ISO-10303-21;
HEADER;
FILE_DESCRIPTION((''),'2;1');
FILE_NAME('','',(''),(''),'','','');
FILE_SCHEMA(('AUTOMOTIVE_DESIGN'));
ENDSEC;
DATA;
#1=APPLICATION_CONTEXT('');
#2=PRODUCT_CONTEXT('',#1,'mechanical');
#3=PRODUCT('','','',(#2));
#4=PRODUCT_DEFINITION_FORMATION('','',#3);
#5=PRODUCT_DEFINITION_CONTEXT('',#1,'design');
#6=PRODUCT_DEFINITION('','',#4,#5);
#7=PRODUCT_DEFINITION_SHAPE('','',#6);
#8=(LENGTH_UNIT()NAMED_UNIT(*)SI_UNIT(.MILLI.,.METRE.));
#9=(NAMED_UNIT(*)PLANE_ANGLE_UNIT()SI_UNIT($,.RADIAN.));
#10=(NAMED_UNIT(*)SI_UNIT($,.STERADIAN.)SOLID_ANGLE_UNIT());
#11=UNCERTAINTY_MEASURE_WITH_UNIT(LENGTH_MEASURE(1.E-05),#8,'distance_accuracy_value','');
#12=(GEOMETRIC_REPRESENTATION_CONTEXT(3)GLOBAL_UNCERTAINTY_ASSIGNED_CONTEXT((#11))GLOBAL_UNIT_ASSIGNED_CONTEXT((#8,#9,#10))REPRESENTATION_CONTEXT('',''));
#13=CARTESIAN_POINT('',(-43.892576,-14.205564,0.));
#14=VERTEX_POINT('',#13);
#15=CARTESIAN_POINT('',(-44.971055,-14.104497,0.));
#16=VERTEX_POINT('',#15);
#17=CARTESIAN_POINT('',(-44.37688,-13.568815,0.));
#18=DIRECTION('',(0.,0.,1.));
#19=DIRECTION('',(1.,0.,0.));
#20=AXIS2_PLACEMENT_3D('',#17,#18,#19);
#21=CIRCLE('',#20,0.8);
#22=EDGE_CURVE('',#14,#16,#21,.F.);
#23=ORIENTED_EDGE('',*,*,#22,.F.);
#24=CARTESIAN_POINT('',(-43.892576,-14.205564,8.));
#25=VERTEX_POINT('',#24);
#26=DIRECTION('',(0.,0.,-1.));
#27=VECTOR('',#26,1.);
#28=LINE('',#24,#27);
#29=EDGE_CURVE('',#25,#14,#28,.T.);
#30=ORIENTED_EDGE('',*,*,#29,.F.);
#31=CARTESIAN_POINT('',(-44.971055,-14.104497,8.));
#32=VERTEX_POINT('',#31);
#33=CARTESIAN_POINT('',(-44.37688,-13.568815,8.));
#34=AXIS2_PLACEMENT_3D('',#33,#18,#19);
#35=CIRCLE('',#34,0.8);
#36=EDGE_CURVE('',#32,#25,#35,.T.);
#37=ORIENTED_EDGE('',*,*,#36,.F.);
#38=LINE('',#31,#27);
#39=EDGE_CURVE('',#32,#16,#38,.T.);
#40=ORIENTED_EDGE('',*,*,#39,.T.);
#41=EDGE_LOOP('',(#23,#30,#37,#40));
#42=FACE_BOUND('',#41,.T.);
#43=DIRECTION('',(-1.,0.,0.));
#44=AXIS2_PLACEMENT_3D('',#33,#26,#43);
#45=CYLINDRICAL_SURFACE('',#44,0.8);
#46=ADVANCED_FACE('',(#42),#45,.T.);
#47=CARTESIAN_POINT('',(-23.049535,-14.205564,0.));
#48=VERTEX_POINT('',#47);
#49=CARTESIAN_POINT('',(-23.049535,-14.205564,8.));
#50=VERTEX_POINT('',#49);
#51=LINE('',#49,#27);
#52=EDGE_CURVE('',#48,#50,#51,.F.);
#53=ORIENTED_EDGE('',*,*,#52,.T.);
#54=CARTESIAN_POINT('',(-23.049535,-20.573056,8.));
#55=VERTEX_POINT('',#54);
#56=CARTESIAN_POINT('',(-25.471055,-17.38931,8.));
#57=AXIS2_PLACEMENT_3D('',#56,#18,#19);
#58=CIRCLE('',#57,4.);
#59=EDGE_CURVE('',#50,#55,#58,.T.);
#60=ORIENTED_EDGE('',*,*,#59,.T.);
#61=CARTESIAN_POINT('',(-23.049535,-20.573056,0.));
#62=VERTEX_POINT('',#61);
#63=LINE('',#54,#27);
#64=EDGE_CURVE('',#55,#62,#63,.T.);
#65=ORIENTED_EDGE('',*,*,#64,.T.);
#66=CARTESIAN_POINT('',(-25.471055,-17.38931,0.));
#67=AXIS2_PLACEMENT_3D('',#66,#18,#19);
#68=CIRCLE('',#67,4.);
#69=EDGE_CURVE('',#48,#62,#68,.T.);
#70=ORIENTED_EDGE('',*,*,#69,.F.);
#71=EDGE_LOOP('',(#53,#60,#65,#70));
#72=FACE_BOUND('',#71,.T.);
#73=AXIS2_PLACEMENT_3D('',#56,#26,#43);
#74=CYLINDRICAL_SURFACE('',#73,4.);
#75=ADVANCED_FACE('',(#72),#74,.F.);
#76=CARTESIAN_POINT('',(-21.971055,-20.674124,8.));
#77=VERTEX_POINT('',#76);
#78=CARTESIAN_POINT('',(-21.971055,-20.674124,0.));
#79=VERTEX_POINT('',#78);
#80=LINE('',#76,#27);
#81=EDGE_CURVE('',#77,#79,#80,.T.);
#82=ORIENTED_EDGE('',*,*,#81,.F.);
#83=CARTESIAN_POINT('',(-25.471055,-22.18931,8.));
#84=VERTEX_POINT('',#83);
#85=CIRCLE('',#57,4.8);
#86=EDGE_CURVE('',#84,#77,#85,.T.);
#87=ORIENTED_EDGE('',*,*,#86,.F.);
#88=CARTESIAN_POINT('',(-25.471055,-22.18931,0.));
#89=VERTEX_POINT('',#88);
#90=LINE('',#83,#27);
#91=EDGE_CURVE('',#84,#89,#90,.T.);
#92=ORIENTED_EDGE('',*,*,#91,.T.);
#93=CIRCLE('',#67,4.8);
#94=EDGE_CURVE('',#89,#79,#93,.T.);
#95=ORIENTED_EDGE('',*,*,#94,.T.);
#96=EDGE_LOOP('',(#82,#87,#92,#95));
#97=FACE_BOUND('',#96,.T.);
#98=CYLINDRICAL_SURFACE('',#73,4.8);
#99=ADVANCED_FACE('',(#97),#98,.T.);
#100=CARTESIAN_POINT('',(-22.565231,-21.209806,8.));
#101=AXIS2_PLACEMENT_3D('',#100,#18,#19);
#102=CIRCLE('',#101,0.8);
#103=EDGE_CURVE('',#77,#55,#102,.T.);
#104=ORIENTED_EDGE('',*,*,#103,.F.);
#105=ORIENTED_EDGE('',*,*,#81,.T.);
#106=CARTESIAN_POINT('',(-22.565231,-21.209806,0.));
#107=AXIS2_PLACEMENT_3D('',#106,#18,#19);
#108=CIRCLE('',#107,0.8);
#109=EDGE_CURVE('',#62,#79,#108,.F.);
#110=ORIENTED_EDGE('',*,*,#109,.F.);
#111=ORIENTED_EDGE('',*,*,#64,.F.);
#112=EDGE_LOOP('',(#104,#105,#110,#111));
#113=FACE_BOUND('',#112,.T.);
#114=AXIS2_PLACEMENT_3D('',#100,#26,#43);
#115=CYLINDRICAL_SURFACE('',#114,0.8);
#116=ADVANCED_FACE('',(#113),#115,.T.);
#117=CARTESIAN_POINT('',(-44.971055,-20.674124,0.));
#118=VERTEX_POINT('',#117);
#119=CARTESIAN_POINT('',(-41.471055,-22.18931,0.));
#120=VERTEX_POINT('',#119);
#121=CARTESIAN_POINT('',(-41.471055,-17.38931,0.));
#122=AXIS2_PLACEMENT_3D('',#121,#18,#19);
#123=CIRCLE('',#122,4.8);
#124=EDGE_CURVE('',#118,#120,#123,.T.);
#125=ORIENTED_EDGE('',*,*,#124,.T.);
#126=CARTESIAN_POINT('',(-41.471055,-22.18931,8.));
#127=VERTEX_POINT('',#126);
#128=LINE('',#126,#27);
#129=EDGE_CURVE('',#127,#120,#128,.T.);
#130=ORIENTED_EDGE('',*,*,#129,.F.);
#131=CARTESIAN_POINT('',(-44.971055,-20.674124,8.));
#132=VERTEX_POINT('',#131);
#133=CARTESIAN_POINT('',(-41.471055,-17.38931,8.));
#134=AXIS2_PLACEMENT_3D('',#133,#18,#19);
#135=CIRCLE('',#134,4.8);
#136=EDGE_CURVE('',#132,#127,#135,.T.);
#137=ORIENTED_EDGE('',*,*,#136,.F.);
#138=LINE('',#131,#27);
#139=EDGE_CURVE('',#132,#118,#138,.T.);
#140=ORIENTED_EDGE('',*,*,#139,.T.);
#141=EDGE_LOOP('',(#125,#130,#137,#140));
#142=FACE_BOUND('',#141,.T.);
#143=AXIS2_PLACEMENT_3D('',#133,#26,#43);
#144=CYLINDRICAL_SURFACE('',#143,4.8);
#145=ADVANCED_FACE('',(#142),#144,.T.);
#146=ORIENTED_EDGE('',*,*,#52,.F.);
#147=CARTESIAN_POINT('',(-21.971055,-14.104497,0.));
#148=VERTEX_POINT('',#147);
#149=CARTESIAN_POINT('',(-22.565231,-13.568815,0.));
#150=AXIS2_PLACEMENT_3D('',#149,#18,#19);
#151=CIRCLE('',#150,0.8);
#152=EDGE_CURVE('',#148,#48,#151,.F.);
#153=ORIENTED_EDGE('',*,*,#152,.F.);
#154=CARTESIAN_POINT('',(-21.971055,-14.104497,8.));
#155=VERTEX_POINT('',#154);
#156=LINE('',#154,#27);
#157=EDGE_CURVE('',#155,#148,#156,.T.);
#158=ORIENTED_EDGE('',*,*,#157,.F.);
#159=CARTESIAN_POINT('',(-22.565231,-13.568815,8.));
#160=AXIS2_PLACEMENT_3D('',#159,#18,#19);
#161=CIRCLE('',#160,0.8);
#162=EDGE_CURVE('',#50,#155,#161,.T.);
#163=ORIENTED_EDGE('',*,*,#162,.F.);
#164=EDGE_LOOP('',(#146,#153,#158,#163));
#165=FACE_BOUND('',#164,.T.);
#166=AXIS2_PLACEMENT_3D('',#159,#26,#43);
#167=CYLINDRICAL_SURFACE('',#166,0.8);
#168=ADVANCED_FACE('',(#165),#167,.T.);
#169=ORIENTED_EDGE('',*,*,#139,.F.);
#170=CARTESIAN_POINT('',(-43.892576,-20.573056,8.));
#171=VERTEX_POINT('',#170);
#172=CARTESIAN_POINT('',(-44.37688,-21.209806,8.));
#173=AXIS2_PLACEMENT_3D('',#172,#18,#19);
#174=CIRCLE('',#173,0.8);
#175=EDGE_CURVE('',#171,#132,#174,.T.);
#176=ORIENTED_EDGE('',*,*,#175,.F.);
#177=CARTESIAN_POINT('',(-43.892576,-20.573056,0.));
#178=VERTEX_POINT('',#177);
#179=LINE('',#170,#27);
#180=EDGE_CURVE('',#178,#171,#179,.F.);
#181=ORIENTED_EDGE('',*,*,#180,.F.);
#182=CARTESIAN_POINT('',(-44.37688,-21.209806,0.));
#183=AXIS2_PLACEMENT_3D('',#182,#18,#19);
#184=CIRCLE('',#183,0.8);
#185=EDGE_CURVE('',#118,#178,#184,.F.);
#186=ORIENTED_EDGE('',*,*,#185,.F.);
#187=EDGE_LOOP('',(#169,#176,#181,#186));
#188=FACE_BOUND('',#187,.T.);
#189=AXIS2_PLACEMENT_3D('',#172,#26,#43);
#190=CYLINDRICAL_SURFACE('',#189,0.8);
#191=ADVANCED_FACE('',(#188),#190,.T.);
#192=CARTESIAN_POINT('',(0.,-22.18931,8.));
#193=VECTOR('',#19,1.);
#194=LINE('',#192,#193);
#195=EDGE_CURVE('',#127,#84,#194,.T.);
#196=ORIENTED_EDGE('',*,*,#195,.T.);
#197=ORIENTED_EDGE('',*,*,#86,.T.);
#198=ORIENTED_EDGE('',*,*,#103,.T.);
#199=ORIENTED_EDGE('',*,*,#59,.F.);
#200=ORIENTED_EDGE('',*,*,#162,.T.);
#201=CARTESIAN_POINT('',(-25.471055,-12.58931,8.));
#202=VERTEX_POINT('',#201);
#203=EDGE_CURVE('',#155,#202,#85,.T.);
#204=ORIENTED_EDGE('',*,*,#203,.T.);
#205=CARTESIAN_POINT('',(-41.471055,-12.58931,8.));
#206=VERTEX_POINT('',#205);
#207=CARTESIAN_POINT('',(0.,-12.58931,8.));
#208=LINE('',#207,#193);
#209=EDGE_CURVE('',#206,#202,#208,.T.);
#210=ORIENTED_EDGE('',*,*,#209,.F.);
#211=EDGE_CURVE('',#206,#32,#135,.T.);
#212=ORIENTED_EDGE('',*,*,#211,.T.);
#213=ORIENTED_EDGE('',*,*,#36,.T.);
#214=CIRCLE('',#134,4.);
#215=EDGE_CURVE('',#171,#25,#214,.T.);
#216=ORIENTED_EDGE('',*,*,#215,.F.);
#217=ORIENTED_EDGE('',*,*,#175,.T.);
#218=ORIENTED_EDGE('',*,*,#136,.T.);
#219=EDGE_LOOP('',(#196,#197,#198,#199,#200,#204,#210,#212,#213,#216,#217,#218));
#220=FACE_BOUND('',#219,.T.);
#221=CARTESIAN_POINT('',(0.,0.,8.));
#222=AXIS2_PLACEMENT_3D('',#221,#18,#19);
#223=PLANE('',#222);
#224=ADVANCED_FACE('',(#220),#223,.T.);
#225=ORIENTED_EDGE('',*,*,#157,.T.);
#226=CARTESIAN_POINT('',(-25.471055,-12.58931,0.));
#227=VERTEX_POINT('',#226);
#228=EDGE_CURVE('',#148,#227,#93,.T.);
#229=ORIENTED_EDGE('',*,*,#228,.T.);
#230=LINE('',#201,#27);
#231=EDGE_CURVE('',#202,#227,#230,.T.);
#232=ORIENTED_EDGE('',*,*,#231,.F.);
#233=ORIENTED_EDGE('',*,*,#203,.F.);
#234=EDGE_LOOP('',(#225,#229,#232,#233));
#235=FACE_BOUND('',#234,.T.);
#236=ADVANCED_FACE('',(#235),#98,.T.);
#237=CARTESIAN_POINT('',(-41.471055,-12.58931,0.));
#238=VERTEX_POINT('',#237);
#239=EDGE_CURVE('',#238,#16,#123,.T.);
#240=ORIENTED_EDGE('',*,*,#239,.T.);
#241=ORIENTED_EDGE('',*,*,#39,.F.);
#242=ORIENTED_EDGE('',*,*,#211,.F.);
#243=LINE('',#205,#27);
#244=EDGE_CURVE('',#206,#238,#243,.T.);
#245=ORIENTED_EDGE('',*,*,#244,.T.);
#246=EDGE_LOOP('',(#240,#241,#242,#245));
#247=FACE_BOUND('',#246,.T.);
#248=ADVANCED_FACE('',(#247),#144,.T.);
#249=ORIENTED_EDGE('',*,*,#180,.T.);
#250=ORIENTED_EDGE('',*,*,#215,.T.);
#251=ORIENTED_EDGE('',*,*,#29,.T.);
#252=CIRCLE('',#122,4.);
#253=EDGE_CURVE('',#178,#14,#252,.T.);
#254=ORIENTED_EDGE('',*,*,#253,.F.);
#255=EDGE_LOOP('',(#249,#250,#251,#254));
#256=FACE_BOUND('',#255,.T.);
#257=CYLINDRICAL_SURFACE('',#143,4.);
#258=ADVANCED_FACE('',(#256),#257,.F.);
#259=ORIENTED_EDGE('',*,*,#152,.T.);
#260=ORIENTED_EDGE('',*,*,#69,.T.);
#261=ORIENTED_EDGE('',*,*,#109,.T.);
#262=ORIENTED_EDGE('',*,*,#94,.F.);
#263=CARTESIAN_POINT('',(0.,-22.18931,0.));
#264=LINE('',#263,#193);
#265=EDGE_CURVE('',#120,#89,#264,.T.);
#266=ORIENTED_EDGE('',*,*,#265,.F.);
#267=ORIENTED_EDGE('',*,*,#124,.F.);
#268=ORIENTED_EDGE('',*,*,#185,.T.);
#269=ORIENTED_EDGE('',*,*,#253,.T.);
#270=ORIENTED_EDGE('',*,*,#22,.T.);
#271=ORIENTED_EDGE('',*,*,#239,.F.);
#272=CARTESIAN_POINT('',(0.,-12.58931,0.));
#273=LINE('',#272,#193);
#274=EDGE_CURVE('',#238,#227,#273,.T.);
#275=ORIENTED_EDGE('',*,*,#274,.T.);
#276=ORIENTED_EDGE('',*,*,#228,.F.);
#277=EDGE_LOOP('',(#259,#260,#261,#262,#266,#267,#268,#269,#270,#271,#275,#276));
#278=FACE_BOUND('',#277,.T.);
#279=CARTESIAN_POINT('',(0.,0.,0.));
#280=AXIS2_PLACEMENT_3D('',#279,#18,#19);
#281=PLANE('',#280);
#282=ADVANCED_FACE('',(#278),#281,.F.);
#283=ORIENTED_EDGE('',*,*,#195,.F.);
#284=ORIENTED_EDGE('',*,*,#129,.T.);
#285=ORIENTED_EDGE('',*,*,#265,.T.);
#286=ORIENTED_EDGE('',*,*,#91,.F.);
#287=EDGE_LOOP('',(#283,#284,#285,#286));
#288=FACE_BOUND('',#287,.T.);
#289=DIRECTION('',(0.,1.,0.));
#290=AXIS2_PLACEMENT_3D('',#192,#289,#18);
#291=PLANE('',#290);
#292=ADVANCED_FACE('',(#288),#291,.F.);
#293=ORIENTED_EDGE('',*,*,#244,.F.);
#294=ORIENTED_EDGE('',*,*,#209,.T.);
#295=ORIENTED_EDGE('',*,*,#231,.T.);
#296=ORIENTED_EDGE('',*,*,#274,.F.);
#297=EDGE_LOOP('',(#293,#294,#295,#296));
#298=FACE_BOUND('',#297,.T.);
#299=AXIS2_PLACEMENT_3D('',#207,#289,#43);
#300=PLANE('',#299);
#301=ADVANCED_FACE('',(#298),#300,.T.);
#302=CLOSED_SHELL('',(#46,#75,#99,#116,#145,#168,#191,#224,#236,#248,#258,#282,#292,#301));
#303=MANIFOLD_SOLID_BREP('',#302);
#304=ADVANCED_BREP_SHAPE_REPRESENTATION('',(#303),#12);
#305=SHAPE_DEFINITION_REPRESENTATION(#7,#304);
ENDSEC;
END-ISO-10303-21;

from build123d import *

# Parameters (mm, degrees)
EXTRUDE_1_DEPTH = 8
FILLET_1_R      = 0.8


with BuildPart() as part:
    # 草图1 → 凸台-拉伸1 (new body)
    with BuildSketch(Plane.XY):
        with BuildLine():
            Line((-25.471055476, -12.589310126), (-41.471055476, -12.589310126))
            ThreePointArc((-41.471055476, -12.589310126), (-38.076942926, -13.995197576), (-36.671055476, -17.389310126))
            ThreePointArc((-36.671055476, -17.389310126), (-38.076942926, -20.783422675), (-41.471055476, -22.189310126))
            Line((-41.471055476, -22.189310126), (-25.471055476, -22.189310126))
            ThreePointArc((-25.471055476, -22.189310126), (-30.271055476, -17.389310126), (-25.471055476, -12.589310126))
        make_face()
        with BuildLine():
            ThreePointArc((-36.671055476, -17.389310126), (-38.076942926, -13.995197576), (-41.471055476, -12.589310126))
            Line((-41.471055476, -12.589310126), (-41.471055476, -13.389310126))
            ThreePointArc((-41.471055476, -13.389310126), (-38.642628351, -14.560883001), (-37.471055476, -17.389310126))
            ThreePointArc((-37.471055476, -17.389310126), (-38.642628351, -20.21773725), (-41.471055476, -21.389310126))
            Line((-41.471055476, -21.389310126), (-41.471055476, -22.189310126))
            ThreePointArc((-41.471055476, -22.189310126), (-38.076942926, -20.783422675), (-36.671055476, -17.389310126))
        make_face()
        with BuildLine():
            Line((-25.471055476, -13.389310126), (-25.471055476, -12.589310126))
            ThreePointArc((-25.471055476, -12.589310126), (-30.271055476, -17.389310126), (-25.471055476, -22.189310126))
            Line((-25.471055476, -22.189310126), (-25.471055476, -21.389310126))
            ThreePointArc((-25.471055476, -21.389310126), (-29.471055476, -17.389310126), (-25.471055476, -13.389310126))
        make_face()
        with BuildLine():
            ThreePointArc((-21.971055476, -14.104496584), (-23.564108308, -12.984363758), (-25.471055476, -12.589310126))
            Line((-25.471055476, -12.589310126), (-25.471055476, -13.389310126))
            ThreePointArc((-25.471055476, -13.389310126), (-23.43954947, -13.943590557), (-21.971055476, -15.452818452))
            Line((-21.971055476, -15.452818452), (-21.971055476, -14.104496584))
        make_face()
        with BuildLine():
            Line((-25.471055476, -21.389310126), (-25.471055476, -22.189310126))
            ThreePointArc((-25.471055476, -22.189310126), (-23.564108308, -21.794256493), (-21.971055476, -20.674123667))
            Line((-21.971055476, -20.674123667), (-21.971055476, -19.325801799))
            ThreePointArc((-21.971055476, -19.325801799), (-23.43954947, -20.835029694), (-25.471055476, -21.389310126))
        make_face()
        with BuildLine():
            ThreePointArc((-21.971055476, -14.104496584), (-23.564108308, -12.984363758), (-25.471055476, -12.589310126))
            Line((-25.471055476, -12.589310126), (-25.471055476, -13.389310126))
            ThreePointArc((-25.471055476, -13.389310126), (-23.43954947, -13.943590557), (-21.971055476, -15.452818452))
            Line((-21.971055476, -15.452818452), (-21.971055476, -14.104496584))
        make_face()
        with BuildLine():
            Line((-25.471055476, -21.389310126), (-25.471055476, -22.189310126))
            ThreePointArc((-25.471055476, -22.189310126), (-23.564108308, -21.794256493), (-21.971055476, -20.674123667))
            Line((-21.971055476, -20.674123667), (-21.971055476, -19.325801799))
            ThreePointArc((-21.971055476, -19.325801799), (-23.43954947, -20.835029694), (-25.471055476, -21.389310126))
        make_face()
        with BuildLine():
            Line((-41.471055476, -13.389310126), (-41.471055476, -12.589310126))
            ThreePointArc((-41.471055476, -12.589310126), (-43.378002644, -12.984363758), (-44.971055476, -14.104496584))
            Line((-44.971055476, -14.104496584), (-44.971055476, -15.452818452))
            ThreePointArc((-44.971055476, -15.452818452), (-43.502561482, -13.943590557), (-41.471055476, -13.389310126))
        make_face()
        with BuildLine():
            Line((-41.471055476, -22.189310126), (-41.471055476, -21.389310126))
            ThreePointArc((-41.471055476, -21.389310126), (-43.502561482, -20.835029694), (-44.971055476, -19.325801799))
            Line((-44.971055476, -19.325801799), (-44.971055476, -20.674123667))
            ThreePointArc((-44.971055476, -20.674123667), (-43.378002644, -21.794256493), (-41.471055476, -22.189310126))
        make_face()
        with BuildLine():
            Line((-41.471055476, -13.389310126), (-41.471055476, -12.589310126))
            ThreePointArc((-41.471055476, -12.589310126), (-43.378002644, -12.984363758), (-44.971055476, -14.104496584))
            Line((-44.971055476, -14.104496584), (-44.971055476, -15.452818452))
            ThreePointArc((-44.971055476, -15.452818452), (-43.502561482, -13.943590557), (-41.471055476, -13.389310126))
        make_face()
        with BuildLine():
            Line((-41.471055476, -22.189310126), (-41.471055476, -21.389310126))
            ThreePointArc((-41.471055476, -21.389310126), (-43.502561482, -20.835029694), (-44.971055476, -19.325801799))
            Line((-44.971055476, -19.325801799), (-44.971055476, -20.674123667))
            ThreePointArc((-44.971055476, -20.674123667), (-43.378002644, -21.794256493), (-41.471055476, -22.189310126))
        make_face()
    extrude(amount=EXTRUDE_1_DEPTH)

    # 圆角1
    # the kernel refuses this fillet: 0.8 mm, written as the material it takes off along each edge
    with BuildSketch(Plane(origin=(-21.971055476, -15.452818452, -4.122167705), x_dir=(0, 1, 0), z_dir=(0, 0, 1)), Plane(origin=(-44.971055476, -19.325801799, -4.122167705), x_dir=(0, -1, 0), z_dir=(0, 0, 1))) as fillet_1_piece_1:
        with BuildLine():
            CenterArc((1.884003799, 0.594175789), FILLET_1_R, 142.743805491, 85.219808153)
            Line((1.247254554, 1.078479824), (1.234519569, 1.088165905))
            ThreePointArc((1.234519569, 1.088165905), (0.66933609, 0.486377982), (-0.007745967, 0.014))
            Line((-0.007745967, 0.014), (0, -0.016))
            ThreePointArc((0, -0.016), (0.674160934, -0.016), (1.337608229, -0.011883516))
            Line((1.337608229, -0.011883516), (1.348321868, 0))
        make_face()
    extrude(amount=16.24433541, mode=Mode.SUBTRACT)
    with BuildSketch(Plane(origin=(-21.971055476, -19.325801799, -4.122167705), x_dir=(-0.6540732337391989, -0.7564312294623664, 0), z_dir=(0, 0, 1))) as fillet_1_piece_2:
        with BuildLine():
            CenterArc((1.81375379, 0.782823335), FILLET_1_R, 172.885801288, 85.219808153)
            Line((1.019912768, 0.881901244), (1.004035948, 0.883882803))
            ThreePointArc((1.004035948, 0.883882803), (0.499491212, 0.453053522), (-0.010465172, 0.0121029))
            Line((-0.010465172, 0.0121029), (0.003297734, -0.015656467))
            ThreePointArc((0.003297734, -0.015656467), (0.824433541, 0.069883326), (1.645569348, -0.015656467))
            Line((1.645569348, -0.015656467), (1.648867082, 0))
        make_face()
    extrude(amount=16.24433541, mode=Mode.SUBTRACT)
    with BuildSketch(Plane(origin=(-44.971055476, -15.452818452, -4.122167705), x_dir=(0, 1, 0), z_dir=(0, 0, 1))) as fillet_1_piece_3:
        with BuildLine():
            CenterArc((1.884003799, -0.594175789), FILLET_1_R, 132.036386357, 85.219808153)
            Line((1.247254554, -1.078479824), (1.234519569, -1.088165905))
            ThreePointArc((1.234519569, -1.088165905), (0.66933609, -0.486377982), (-0.007745967, -0.014))
            Line((-0.007745967, -0.014), (0, 0.016))
            ThreePointArc((0, 0.016), (0.674160934, 0.016), (1.337608229, 0.011883516))
            Line((1.337608229, 0.011883516), (1.348321868, 0))
        make_face()
    extrude(amount=16.24433541, mode=Mode.SUBTRACT)


solid = part.part
